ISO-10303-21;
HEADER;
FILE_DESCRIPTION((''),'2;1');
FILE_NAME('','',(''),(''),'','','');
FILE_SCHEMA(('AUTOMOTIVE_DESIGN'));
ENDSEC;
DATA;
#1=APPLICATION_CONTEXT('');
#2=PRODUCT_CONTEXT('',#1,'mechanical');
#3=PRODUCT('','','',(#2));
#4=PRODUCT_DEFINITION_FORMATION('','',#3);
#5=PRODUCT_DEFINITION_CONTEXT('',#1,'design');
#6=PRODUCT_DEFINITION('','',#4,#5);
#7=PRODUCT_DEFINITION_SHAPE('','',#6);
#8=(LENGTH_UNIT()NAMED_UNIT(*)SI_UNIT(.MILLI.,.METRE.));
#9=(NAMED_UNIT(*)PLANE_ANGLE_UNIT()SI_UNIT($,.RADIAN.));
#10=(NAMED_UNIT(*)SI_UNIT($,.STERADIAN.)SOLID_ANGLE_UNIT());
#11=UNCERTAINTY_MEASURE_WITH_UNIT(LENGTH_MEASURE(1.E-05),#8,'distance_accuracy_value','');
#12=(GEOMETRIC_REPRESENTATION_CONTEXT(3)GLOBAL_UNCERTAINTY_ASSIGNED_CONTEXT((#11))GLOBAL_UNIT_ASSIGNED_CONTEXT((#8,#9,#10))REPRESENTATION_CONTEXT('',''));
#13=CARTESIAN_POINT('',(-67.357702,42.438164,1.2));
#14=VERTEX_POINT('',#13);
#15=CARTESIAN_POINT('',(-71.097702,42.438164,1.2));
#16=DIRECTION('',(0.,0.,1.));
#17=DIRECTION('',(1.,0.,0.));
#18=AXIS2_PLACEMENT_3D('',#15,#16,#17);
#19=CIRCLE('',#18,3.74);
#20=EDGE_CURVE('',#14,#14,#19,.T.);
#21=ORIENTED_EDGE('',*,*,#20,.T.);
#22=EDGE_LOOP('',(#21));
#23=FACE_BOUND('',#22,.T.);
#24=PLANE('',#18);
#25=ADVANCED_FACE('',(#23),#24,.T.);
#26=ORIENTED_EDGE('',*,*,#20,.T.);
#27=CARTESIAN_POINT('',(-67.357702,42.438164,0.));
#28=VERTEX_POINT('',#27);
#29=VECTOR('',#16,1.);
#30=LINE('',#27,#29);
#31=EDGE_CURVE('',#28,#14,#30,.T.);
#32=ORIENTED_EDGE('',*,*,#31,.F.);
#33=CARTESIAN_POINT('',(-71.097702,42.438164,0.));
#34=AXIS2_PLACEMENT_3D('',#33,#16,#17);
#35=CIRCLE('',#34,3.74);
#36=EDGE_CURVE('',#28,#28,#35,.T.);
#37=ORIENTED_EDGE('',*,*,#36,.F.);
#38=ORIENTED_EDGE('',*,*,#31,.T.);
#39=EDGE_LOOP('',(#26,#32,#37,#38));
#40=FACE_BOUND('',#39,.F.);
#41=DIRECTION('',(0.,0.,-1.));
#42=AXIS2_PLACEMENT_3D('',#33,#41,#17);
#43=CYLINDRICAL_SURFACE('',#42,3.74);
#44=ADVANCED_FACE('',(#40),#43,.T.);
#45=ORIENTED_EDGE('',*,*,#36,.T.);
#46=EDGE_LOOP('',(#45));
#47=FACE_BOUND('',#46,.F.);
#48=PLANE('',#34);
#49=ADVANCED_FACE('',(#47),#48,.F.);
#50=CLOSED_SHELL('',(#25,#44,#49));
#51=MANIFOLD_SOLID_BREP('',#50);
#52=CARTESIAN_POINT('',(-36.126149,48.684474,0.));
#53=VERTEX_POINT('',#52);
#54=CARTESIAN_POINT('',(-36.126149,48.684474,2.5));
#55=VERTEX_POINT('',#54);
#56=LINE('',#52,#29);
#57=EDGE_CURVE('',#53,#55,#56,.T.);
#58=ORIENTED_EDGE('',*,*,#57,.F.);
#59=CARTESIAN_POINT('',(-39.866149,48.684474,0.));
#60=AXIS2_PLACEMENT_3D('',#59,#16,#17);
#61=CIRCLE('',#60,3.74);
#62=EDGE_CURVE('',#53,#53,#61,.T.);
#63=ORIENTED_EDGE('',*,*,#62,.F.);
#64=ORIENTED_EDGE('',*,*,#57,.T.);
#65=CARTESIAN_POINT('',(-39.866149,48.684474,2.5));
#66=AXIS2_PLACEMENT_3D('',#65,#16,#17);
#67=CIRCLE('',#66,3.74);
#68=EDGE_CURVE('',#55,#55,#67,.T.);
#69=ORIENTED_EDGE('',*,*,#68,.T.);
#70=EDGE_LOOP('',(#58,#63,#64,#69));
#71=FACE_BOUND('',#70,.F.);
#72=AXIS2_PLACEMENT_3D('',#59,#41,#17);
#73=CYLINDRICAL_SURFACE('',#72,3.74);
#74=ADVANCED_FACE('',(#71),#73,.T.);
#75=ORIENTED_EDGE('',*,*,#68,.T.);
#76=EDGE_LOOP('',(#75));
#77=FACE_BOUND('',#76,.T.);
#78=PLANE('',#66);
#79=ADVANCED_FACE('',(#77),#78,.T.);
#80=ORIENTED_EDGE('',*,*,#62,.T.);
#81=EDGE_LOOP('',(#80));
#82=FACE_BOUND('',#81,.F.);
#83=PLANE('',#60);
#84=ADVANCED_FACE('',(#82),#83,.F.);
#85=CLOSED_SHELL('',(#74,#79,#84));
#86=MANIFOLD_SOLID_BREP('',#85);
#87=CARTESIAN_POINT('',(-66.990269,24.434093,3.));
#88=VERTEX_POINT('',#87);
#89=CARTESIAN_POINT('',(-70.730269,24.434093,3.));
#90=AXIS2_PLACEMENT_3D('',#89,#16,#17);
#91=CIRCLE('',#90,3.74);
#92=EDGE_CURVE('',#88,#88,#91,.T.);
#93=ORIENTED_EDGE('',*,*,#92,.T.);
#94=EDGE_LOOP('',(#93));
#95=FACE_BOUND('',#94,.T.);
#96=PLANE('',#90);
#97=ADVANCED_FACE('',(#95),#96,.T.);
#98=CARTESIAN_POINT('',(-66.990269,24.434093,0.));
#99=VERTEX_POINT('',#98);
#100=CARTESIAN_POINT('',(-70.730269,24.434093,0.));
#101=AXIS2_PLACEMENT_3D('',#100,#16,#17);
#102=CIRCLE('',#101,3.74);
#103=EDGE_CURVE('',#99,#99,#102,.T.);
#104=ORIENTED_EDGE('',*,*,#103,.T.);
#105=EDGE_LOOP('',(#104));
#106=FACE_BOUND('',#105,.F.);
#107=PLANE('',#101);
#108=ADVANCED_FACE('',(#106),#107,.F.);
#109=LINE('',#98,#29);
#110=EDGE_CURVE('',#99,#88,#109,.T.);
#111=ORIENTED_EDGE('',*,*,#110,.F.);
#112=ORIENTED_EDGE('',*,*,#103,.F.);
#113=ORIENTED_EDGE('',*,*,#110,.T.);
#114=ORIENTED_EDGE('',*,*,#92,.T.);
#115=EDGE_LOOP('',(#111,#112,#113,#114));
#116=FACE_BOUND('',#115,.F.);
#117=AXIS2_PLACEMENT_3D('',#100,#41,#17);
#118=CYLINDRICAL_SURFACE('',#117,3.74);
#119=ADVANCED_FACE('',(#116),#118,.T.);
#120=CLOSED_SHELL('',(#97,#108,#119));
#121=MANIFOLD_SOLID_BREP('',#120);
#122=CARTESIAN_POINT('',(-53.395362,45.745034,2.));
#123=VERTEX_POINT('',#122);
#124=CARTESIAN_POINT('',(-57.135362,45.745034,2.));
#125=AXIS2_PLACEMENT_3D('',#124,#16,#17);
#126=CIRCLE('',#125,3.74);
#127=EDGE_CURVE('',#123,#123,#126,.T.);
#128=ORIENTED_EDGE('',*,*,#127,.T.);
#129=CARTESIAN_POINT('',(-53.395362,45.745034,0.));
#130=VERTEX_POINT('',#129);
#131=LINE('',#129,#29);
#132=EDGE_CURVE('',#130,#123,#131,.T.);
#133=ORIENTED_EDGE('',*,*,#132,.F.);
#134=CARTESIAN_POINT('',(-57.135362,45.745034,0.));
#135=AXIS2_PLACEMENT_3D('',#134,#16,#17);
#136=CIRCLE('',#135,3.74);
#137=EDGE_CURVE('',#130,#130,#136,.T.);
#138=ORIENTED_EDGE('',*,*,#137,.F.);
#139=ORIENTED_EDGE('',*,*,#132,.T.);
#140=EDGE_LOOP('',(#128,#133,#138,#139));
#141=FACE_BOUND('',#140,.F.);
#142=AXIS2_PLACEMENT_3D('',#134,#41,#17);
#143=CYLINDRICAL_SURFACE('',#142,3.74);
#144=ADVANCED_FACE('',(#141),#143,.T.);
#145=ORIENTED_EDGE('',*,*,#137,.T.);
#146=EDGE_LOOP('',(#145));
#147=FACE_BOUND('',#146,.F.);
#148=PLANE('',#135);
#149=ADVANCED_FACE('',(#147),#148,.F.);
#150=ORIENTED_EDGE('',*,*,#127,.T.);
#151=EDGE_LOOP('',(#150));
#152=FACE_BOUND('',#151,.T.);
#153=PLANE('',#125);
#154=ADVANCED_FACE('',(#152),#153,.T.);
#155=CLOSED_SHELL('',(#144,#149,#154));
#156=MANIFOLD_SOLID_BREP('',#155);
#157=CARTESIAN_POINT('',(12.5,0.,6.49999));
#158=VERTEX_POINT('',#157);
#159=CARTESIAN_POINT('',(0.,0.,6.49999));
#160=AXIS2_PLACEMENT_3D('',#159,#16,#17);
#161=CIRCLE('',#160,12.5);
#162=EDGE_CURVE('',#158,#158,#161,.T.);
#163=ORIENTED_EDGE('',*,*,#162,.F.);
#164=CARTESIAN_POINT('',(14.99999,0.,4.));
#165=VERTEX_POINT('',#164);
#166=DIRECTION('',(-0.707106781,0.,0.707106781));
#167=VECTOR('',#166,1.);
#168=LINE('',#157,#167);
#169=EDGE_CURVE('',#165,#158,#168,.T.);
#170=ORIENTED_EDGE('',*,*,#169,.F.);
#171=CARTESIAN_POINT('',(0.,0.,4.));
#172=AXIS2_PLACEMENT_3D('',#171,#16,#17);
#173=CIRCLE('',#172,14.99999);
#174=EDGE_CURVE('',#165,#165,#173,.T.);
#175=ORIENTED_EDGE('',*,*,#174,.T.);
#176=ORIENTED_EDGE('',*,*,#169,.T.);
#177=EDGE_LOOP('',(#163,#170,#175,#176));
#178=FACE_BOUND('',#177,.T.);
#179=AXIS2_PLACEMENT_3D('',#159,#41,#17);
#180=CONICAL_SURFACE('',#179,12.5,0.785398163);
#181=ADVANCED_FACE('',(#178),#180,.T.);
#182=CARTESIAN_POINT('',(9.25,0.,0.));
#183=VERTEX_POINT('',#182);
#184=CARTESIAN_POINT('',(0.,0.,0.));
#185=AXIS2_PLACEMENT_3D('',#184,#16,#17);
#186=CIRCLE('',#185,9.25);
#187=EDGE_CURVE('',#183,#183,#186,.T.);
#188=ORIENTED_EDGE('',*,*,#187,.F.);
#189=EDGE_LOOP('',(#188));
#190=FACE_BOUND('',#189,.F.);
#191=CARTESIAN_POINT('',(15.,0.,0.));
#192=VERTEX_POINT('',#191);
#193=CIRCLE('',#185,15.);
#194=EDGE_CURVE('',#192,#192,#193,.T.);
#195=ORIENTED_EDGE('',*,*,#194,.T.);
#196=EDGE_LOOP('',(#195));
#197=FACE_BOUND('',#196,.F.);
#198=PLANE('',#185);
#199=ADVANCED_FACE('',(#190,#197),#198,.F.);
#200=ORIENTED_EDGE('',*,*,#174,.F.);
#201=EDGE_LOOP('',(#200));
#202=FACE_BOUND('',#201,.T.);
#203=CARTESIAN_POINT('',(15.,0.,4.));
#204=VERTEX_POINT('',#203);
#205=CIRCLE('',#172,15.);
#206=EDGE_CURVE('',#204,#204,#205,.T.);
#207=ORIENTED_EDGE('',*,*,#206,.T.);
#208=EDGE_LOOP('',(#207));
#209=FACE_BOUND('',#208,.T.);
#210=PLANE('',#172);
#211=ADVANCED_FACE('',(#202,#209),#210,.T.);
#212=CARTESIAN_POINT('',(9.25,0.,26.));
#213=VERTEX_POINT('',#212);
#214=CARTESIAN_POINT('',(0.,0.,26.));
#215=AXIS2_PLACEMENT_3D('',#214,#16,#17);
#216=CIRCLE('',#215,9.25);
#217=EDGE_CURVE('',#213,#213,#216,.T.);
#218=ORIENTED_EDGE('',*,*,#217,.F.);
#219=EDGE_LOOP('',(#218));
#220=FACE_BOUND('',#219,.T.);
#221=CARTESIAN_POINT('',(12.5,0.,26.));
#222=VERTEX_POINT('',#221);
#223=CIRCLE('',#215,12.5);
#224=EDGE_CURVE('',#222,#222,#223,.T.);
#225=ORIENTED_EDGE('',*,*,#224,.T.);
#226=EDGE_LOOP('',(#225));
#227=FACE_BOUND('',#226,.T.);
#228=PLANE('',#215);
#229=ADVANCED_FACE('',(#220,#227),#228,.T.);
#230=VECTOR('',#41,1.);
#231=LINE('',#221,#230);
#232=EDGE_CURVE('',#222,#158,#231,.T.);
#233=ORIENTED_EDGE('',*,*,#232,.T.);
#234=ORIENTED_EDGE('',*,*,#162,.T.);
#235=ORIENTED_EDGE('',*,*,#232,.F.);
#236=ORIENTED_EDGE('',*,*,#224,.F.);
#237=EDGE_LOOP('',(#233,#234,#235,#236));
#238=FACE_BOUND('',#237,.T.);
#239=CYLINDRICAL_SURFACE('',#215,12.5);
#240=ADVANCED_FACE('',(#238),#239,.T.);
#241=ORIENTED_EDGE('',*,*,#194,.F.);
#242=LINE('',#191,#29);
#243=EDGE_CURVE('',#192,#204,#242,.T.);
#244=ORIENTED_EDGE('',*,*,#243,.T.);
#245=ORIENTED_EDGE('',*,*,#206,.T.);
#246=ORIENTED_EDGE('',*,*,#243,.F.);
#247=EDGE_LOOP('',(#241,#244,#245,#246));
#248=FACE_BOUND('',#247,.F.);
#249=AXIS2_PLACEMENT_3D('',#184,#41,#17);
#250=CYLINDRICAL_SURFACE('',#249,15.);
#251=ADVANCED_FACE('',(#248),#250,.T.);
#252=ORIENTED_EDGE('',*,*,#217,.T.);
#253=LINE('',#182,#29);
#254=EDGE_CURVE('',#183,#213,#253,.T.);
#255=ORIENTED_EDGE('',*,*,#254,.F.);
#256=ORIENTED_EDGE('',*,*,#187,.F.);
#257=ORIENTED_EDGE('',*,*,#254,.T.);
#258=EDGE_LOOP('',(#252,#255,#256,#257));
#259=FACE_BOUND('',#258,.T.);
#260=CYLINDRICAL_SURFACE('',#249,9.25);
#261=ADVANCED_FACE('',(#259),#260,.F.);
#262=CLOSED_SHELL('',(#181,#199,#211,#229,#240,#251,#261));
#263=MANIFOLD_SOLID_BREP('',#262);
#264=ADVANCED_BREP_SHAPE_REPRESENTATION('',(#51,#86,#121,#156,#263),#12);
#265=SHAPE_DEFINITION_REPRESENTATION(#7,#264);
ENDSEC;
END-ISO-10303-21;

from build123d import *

# Parameters (mm, degrees)
F0_R      = 3.74
F1_DEPTH  = 1.2
F2_R      = 3.74
F3_DEPTH  = 2
F4_R      = 3.74
F5_DEPTH  = 2.5
F6_R      = 3.74
F7_DEPTH  = 3
F8_R      = 15
F8_R_2    = 9.25
F9_DEPTH  = 26
F10_R     = 15
F10_R_2   = 12.5
F11_DEPTH = 22
F12_SIZE  = 2.49999


# Not quite as in the source:
# - a fillet or chamfer is up to 0.001 mm smaller than in the source, because OpenCascade refuses the exact size


with BuildPart() as f1:
    # F0 (on Top) → F1 (new body)
    with BuildSketch(Plane.XY):
        with Locations((-71.0977017879, 42.4381643534)):
            Circle(F0_R)
    extrude(amount=F1_DEPTH)


with BuildPart() as f3:
    # F2 (on Top) → F3 (new body)
    with BuildSketch(Plane.XY):
        with Locations((-57.1353621781, 45.7450337708)):
            Circle(F2_R)
    extrude(amount=F3_DEPTH)


with BuildPart() as f5:
    # F4 (on Top) → F5 (new body)
    with BuildSketch(Plane.XY):
        with Locations((-39.8661494255, 48.6844740808)):
            Circle(F4_R)
    extrude(amount=F5_DEPTH)


with BuildPart() as f7:
    # F6 (on Top) → F7 (new body)
    with BuildSketch(Plane.XY):
        with Locations((-70.7302689552, 24.4340933859)):
            Circle(F6_R)
    extrude(amount=F7_DEPTH)


with BuildPart() as f9:
    # F8 (on Top) → F9 (new body)
    with BuildSketch(Plane.XY):
        Circle(F8_R)
        Circle(F8_R_2, mode=Mode.SUBTRACT)
    extrude(amount=F9_DEPTH)

    # F10 (on face) → F11 (cut)
    with BuildSketch(Plane.XY.offset(26)):
        Circle(F10_R)
        Circle(F10_R_2, mode=Mode.SUBTRACT)
    extrude(amount=-F11_DEPTH, mode=Mode.SUBTRACT)

    # F12 (size 2.5 in the source; OpenCascade refuses exactly that, so slightly less here)
    f12_edges = [f9.edges().sort_by_distance(p)[0] for p in [
        (-12.5, 0, 4),
    ]]
    chamfer(f12_edges, length=F12_SIZE)


solid = Compound([f1.part, f3.part, f5.part, f7.part, f9.part])
